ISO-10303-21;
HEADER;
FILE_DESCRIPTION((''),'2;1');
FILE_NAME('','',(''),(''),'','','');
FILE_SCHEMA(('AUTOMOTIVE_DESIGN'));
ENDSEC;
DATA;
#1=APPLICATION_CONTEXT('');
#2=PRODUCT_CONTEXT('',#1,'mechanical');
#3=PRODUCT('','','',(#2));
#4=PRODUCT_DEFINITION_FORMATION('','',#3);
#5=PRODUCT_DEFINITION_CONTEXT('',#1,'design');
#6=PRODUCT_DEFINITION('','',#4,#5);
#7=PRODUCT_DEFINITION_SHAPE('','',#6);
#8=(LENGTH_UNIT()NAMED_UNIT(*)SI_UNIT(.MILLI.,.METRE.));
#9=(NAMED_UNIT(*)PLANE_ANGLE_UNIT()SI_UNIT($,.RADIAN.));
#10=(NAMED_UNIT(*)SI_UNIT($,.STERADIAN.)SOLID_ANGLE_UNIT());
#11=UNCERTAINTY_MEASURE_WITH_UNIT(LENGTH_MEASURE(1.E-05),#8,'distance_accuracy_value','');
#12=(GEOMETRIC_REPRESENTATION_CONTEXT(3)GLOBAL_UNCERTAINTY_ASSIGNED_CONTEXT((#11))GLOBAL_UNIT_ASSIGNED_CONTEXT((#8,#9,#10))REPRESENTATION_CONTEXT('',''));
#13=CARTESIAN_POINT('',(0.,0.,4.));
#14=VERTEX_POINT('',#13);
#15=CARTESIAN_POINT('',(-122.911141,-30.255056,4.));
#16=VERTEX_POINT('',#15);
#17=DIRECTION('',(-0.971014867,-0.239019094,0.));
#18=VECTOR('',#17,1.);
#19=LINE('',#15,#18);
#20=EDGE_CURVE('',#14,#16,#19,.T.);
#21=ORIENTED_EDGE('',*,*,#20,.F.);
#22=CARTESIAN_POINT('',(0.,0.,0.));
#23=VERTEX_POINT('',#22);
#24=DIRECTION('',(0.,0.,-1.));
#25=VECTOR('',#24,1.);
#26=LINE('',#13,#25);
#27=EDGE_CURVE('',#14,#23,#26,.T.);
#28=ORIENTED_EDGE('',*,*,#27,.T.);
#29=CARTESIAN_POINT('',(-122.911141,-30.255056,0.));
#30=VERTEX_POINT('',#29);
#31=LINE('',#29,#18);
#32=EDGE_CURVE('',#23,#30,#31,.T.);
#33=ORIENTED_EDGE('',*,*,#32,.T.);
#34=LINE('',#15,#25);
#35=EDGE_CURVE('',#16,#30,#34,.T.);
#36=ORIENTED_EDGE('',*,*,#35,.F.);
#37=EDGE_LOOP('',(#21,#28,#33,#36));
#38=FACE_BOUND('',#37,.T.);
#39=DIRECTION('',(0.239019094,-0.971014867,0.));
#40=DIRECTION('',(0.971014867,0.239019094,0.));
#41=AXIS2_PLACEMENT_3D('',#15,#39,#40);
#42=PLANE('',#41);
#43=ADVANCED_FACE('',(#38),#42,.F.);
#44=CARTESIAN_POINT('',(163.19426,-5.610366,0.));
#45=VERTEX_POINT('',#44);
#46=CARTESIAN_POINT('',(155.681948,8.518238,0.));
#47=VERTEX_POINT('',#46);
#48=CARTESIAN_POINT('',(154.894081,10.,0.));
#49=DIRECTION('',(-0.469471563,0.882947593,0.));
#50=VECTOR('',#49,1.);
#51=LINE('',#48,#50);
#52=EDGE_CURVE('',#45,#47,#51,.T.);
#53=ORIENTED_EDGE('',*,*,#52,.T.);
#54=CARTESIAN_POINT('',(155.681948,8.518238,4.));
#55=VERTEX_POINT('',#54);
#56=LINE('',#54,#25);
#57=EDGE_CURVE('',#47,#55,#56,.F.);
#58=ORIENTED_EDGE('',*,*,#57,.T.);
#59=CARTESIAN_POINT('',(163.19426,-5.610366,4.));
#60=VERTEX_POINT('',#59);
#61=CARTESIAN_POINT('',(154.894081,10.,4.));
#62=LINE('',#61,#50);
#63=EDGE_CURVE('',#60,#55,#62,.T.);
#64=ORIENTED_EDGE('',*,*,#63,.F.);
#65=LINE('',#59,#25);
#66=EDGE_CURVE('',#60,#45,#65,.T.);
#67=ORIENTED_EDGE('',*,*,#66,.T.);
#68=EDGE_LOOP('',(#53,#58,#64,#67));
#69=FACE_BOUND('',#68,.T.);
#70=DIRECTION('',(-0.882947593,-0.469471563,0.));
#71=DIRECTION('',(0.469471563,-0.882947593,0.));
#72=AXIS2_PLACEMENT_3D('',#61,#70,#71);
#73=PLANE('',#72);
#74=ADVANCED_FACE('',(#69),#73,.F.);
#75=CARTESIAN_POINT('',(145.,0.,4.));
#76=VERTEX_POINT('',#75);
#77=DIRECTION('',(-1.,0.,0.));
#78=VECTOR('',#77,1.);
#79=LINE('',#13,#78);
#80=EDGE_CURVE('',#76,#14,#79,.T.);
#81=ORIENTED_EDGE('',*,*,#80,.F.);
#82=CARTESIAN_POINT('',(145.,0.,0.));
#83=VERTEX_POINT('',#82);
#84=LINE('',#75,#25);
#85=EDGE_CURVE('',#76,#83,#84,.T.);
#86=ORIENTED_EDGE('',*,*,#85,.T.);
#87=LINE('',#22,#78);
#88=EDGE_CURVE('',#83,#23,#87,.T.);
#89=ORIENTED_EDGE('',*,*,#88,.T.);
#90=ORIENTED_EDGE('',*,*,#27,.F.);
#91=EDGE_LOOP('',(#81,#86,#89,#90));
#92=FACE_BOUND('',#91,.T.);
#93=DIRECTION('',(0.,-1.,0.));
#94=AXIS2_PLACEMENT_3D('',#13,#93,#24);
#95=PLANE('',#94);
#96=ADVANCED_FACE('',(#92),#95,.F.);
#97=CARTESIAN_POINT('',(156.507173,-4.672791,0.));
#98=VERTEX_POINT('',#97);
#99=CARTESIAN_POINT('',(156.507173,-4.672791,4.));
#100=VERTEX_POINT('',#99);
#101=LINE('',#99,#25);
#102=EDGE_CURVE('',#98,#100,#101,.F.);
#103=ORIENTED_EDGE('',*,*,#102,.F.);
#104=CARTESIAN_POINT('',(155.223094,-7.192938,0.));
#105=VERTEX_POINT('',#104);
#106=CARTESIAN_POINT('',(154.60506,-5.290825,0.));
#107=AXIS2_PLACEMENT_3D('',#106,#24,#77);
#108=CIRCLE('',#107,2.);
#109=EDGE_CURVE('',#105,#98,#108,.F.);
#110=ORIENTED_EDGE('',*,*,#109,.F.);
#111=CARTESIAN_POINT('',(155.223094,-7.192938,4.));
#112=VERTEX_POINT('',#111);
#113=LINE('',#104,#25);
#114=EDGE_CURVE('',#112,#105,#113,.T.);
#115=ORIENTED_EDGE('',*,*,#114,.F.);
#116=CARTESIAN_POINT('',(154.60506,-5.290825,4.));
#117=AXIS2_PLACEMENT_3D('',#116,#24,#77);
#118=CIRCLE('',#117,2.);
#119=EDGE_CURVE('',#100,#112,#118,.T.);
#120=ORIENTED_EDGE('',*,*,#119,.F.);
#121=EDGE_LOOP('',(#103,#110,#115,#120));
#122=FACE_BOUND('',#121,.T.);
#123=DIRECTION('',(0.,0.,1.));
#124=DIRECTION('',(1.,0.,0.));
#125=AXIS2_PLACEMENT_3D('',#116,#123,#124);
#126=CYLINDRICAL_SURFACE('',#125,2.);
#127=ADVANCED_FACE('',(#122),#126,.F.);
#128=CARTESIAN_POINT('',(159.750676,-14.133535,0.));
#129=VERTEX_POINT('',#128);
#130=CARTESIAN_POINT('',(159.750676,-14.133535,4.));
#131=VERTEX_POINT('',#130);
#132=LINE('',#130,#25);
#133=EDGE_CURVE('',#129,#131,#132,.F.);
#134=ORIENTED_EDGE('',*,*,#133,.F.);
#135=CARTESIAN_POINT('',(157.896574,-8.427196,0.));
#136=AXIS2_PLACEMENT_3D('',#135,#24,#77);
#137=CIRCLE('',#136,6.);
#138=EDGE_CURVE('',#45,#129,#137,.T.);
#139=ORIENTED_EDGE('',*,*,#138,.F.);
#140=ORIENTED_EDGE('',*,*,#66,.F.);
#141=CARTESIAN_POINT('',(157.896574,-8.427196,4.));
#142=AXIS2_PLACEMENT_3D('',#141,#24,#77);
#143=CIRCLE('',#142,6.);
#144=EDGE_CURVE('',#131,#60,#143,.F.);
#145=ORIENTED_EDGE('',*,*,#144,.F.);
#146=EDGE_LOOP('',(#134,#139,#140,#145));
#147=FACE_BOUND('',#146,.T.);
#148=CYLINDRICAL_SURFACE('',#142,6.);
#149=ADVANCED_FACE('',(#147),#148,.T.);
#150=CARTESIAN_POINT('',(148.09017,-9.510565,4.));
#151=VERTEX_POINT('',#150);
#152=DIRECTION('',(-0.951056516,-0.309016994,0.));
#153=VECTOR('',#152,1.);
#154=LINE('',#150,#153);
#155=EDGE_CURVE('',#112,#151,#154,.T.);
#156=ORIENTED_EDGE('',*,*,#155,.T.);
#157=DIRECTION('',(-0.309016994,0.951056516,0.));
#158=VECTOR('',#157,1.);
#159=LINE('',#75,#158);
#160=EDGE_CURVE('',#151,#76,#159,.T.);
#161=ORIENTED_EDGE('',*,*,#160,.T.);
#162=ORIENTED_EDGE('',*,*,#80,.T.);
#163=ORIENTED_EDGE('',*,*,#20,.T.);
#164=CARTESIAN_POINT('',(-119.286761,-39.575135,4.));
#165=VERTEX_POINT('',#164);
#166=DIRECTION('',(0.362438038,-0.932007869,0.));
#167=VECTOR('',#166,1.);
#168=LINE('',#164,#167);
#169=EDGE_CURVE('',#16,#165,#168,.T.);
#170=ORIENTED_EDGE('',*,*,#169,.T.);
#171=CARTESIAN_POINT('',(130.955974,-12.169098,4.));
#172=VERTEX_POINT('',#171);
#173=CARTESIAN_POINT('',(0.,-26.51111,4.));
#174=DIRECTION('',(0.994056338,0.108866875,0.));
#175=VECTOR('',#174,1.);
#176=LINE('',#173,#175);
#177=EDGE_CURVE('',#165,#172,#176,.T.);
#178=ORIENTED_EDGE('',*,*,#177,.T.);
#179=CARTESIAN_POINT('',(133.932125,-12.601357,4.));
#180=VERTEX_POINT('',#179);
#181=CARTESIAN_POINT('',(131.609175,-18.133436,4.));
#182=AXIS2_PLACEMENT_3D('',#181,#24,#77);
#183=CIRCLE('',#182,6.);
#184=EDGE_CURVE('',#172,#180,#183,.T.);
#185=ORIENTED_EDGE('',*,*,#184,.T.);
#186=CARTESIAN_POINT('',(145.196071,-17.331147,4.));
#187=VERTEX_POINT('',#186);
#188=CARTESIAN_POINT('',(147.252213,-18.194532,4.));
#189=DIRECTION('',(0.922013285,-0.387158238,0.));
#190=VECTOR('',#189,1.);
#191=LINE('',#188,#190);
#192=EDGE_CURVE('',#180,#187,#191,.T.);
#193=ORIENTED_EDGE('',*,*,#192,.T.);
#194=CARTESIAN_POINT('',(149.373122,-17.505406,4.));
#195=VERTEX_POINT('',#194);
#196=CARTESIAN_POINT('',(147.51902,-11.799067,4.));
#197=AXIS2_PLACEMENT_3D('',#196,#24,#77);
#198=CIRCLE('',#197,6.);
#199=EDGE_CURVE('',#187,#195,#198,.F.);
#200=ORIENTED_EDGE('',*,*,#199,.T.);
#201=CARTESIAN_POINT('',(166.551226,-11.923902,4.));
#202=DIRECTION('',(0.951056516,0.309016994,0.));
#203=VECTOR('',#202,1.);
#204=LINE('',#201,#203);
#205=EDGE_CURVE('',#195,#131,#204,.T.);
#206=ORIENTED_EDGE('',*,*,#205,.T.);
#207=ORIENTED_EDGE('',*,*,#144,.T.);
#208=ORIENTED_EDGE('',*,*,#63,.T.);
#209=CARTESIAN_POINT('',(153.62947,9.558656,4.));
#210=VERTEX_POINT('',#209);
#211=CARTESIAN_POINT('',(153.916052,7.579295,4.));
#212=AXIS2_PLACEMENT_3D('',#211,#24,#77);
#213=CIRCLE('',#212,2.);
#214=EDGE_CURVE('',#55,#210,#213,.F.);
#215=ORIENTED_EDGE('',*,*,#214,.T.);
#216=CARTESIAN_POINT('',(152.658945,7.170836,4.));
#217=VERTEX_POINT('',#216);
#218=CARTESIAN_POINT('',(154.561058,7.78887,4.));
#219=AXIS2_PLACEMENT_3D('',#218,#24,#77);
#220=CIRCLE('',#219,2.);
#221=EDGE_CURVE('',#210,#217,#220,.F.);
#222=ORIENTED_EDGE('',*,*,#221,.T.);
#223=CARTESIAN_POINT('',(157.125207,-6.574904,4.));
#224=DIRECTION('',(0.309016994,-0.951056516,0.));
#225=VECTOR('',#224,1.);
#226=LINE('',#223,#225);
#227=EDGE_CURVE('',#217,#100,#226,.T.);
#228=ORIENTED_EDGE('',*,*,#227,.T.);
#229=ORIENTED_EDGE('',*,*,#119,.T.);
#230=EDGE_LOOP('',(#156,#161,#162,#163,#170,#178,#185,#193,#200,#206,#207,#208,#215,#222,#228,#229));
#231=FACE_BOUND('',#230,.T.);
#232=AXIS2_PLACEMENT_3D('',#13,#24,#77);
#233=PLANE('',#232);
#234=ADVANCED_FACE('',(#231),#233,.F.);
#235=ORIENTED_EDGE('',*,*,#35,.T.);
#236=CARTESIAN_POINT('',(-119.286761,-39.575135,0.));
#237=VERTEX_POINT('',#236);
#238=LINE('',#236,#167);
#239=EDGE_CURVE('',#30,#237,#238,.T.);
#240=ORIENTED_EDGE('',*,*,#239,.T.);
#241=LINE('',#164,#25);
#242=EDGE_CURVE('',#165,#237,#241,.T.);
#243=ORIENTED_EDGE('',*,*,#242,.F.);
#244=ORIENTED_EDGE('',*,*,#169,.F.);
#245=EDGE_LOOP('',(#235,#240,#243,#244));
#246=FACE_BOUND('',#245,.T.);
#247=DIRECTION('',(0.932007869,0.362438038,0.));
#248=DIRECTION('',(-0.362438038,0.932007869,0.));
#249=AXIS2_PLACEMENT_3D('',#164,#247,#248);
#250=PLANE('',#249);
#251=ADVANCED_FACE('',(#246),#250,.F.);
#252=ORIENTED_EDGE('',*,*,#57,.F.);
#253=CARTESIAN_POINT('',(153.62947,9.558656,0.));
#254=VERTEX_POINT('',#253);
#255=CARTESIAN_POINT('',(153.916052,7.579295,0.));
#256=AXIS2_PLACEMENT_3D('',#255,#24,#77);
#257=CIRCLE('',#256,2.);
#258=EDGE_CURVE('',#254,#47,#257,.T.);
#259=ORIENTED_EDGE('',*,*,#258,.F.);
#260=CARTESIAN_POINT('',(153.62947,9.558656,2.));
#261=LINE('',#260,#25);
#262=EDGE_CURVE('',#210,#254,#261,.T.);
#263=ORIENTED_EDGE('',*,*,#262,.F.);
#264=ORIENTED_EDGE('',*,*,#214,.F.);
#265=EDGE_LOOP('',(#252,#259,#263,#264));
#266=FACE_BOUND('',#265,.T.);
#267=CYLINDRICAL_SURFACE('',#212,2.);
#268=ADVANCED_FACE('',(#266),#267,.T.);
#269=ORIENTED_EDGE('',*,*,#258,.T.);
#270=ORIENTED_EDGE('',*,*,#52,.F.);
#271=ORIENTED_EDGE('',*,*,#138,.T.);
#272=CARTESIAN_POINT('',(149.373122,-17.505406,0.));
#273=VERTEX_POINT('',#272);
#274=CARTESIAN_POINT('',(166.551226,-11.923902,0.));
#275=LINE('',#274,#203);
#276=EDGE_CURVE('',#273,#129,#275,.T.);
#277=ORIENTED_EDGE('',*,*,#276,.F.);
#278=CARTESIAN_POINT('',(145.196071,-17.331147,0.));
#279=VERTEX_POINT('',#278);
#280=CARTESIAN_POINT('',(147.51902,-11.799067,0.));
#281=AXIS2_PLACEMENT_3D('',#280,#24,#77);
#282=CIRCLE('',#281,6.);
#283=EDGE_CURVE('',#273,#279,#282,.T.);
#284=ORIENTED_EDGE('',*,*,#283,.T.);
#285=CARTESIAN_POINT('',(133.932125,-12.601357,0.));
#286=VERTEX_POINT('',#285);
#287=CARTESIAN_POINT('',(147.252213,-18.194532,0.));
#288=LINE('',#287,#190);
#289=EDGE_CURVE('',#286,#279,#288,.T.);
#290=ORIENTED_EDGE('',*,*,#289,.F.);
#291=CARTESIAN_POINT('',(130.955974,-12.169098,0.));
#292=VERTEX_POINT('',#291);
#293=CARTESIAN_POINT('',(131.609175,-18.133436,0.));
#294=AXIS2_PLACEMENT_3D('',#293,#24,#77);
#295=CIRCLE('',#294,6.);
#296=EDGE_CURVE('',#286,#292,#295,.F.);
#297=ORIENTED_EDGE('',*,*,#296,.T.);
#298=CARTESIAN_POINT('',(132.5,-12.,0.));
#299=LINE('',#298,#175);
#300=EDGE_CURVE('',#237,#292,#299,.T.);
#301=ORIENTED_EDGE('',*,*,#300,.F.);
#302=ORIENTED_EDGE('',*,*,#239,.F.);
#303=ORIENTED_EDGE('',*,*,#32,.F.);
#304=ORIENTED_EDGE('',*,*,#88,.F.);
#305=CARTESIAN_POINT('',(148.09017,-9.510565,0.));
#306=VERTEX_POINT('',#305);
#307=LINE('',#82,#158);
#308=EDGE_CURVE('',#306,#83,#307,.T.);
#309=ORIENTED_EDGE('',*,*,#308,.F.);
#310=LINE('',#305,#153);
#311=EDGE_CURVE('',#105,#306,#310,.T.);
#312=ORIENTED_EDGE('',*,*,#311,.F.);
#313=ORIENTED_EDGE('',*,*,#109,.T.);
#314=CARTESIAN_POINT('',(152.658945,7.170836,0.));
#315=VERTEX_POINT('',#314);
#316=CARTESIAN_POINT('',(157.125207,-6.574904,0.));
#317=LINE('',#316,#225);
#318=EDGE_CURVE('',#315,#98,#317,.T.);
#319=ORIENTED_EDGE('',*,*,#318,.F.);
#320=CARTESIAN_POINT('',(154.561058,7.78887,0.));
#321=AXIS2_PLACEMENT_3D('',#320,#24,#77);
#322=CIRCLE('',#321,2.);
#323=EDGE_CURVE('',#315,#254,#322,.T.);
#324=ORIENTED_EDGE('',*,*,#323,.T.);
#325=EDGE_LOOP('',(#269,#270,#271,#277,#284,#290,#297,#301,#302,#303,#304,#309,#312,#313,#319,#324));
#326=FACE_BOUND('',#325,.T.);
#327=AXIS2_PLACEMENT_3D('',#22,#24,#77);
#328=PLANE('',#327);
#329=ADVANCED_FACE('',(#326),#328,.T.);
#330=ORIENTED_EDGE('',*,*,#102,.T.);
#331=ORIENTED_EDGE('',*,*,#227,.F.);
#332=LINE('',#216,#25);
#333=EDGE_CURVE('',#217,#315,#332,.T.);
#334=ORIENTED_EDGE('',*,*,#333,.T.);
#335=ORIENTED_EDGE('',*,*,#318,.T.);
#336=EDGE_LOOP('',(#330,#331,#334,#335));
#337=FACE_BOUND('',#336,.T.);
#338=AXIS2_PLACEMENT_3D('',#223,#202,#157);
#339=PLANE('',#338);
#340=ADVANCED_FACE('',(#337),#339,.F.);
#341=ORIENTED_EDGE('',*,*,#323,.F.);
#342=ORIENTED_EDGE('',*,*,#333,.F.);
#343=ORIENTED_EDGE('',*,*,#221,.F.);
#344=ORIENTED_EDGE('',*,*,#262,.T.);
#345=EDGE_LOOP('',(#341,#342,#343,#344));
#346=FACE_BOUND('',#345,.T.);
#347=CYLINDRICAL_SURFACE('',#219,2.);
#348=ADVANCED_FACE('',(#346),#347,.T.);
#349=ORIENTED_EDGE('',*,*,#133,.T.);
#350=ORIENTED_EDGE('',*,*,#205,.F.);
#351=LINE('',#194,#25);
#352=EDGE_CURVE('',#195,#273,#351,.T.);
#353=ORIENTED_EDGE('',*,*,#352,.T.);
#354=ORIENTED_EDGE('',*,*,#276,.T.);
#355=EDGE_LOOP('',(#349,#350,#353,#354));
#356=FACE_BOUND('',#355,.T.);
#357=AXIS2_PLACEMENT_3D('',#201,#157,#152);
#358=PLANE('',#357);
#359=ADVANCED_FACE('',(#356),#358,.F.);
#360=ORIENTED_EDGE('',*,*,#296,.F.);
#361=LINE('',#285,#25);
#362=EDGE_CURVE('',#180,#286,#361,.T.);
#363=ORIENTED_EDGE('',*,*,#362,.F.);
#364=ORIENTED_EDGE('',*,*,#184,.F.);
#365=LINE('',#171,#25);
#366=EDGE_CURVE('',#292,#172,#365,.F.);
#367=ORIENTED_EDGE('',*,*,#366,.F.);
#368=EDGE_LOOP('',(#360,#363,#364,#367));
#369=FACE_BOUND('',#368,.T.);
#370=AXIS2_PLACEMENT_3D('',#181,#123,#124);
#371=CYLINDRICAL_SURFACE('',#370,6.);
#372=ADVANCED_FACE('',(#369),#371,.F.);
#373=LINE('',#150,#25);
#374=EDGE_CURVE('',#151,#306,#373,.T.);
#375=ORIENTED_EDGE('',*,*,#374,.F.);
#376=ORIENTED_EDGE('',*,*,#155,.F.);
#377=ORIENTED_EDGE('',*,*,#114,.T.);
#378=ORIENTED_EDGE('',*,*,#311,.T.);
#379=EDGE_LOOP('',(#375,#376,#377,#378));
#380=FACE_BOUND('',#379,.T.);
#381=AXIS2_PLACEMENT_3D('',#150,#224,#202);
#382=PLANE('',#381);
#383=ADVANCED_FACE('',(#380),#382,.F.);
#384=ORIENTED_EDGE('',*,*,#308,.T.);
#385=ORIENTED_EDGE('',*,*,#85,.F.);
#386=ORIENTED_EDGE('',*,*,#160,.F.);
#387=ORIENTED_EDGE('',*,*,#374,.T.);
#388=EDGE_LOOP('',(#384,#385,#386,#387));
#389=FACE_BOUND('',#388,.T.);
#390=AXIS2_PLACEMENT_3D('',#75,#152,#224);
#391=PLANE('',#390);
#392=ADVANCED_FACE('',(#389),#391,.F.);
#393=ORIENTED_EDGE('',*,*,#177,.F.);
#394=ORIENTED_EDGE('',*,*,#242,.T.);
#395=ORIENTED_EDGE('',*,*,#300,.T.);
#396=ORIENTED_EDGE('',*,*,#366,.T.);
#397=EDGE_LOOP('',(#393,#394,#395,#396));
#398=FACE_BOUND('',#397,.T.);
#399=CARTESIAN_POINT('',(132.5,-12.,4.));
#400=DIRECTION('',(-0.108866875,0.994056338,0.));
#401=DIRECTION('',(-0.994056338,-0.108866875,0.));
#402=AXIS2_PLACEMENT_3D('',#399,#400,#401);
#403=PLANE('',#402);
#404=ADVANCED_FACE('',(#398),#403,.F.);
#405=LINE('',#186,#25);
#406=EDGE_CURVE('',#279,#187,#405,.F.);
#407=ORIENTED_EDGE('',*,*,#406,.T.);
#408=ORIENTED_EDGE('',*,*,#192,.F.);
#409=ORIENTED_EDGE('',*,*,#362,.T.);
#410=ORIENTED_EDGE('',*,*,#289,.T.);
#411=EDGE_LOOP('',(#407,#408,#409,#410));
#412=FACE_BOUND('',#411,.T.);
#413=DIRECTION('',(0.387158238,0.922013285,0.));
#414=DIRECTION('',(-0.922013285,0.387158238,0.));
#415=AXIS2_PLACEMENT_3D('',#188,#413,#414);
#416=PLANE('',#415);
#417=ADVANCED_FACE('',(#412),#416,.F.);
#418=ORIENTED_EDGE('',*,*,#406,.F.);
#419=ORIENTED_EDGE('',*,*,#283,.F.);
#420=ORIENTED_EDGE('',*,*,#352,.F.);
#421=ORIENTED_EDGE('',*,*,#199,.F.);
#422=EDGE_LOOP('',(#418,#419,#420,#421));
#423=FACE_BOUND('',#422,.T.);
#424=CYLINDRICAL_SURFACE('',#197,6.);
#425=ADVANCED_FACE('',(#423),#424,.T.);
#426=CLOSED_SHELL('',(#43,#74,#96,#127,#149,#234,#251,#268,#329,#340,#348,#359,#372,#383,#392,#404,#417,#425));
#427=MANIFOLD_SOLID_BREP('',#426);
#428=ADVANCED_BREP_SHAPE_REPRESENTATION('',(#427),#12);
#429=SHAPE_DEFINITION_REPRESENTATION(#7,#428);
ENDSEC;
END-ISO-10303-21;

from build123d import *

# Parameters (mm, degrees)
BOSS_EXTRUDE1_DEPTH = 4
FILLET1_R           = 2
FILLET2_R           = 6


with BuildPart() as part:
    # Sketch1 → Boss-Extrude1 (new body)
    with BuildSketch(Plane.XY):
        Polygon((0, 0), (145, 0), (148.090169944, -9.510565163), (157.125206849, -6.574903716), (152.040911292, 9.072949017), (154.894080841, 10), (166.551226371, -11.92390211), (147.252212567, -18.194531813), (132.5, -12), (0, -26.511110048), (-119.286760587, -39.57513503), (-122.91114097, -30.255056337), align=None)
    extrude(amount=BOSS_EXTRUDE1_DEPTH)

    # Fillet1
    # the kernel refuses this fillet: 2 mm, written as the material it adds along each edge
    with BuildSketch(Plane(origin=(157.125206849, -6.574903716, 0), x_dir=(-0.3090169943749429, 0.951056516295155, 0), z_dir=(0, 0, 1))) as fillet1_piece_1:
        with BuildLine():
            CenterArc((FILLET1_R, FILLET1_R), FILLET1_R, 180, 90)
            Line((0, FILLET1_R), (0, 0))
            Line((0, 0), (FILLET1_R, 0))
        make_face()
    extrude(amount=4)
    # the kernel refuses this fillet: 2 mm, written as the material it takes off along each edge
    with BuildSketch(Plane(origin=(152.040911292, 9.072949017, -5), x_dir=(0.3090169943749437, -0.9510565162951549, 0), z_dir=(0, 0, 1))) as fillet1_2_piece_1:
        with BuildLine():
            CenterArc((FILLET1_R, FILLET1_R), FILLET1_R, 180, 90)
            Line((0, FILLET1_R), (0, 0))
            Line((0, 0), (FILLET1_R, 0))
        make_face()
    extrude(amount=14, mode=Mode.SUBTRACT)
    with BuildSketch(Plane(origin=(154.894080841, 10, -4.195498156), x_dir=(-0.9510565162951539, -0.3090169943749466, 0), z_dir=(0, 0, 1))) as fillet1_2_piece_2:
        with BuildLine():
            CenterArc((FILLET1_R * 0.839099631177, FILLET1_R), FILLET1_R, 190, 80)
            Line((-FILLET1_R * 0.145708121835, FILLET1_R * 0.826351822333), (0, 0))
            Line((0, 0), (FILLET1_R * 0.839099631177, 0))
        make_face()
    extrude(amount=12.390996312, mode=Mode.SUBTRACT)

    # Fillet2
    fillet2_edges = [part.edges().sort_by_distance(p)[0] for p in [
        (166.551226371, -11.92390211, 2),
        (147.252212567, -18.194531813, 2),
        (132.5, -12, 2),
    ]]
    fillet(fillet2_edges, radius=FILLET2_R)


solid = part.part
